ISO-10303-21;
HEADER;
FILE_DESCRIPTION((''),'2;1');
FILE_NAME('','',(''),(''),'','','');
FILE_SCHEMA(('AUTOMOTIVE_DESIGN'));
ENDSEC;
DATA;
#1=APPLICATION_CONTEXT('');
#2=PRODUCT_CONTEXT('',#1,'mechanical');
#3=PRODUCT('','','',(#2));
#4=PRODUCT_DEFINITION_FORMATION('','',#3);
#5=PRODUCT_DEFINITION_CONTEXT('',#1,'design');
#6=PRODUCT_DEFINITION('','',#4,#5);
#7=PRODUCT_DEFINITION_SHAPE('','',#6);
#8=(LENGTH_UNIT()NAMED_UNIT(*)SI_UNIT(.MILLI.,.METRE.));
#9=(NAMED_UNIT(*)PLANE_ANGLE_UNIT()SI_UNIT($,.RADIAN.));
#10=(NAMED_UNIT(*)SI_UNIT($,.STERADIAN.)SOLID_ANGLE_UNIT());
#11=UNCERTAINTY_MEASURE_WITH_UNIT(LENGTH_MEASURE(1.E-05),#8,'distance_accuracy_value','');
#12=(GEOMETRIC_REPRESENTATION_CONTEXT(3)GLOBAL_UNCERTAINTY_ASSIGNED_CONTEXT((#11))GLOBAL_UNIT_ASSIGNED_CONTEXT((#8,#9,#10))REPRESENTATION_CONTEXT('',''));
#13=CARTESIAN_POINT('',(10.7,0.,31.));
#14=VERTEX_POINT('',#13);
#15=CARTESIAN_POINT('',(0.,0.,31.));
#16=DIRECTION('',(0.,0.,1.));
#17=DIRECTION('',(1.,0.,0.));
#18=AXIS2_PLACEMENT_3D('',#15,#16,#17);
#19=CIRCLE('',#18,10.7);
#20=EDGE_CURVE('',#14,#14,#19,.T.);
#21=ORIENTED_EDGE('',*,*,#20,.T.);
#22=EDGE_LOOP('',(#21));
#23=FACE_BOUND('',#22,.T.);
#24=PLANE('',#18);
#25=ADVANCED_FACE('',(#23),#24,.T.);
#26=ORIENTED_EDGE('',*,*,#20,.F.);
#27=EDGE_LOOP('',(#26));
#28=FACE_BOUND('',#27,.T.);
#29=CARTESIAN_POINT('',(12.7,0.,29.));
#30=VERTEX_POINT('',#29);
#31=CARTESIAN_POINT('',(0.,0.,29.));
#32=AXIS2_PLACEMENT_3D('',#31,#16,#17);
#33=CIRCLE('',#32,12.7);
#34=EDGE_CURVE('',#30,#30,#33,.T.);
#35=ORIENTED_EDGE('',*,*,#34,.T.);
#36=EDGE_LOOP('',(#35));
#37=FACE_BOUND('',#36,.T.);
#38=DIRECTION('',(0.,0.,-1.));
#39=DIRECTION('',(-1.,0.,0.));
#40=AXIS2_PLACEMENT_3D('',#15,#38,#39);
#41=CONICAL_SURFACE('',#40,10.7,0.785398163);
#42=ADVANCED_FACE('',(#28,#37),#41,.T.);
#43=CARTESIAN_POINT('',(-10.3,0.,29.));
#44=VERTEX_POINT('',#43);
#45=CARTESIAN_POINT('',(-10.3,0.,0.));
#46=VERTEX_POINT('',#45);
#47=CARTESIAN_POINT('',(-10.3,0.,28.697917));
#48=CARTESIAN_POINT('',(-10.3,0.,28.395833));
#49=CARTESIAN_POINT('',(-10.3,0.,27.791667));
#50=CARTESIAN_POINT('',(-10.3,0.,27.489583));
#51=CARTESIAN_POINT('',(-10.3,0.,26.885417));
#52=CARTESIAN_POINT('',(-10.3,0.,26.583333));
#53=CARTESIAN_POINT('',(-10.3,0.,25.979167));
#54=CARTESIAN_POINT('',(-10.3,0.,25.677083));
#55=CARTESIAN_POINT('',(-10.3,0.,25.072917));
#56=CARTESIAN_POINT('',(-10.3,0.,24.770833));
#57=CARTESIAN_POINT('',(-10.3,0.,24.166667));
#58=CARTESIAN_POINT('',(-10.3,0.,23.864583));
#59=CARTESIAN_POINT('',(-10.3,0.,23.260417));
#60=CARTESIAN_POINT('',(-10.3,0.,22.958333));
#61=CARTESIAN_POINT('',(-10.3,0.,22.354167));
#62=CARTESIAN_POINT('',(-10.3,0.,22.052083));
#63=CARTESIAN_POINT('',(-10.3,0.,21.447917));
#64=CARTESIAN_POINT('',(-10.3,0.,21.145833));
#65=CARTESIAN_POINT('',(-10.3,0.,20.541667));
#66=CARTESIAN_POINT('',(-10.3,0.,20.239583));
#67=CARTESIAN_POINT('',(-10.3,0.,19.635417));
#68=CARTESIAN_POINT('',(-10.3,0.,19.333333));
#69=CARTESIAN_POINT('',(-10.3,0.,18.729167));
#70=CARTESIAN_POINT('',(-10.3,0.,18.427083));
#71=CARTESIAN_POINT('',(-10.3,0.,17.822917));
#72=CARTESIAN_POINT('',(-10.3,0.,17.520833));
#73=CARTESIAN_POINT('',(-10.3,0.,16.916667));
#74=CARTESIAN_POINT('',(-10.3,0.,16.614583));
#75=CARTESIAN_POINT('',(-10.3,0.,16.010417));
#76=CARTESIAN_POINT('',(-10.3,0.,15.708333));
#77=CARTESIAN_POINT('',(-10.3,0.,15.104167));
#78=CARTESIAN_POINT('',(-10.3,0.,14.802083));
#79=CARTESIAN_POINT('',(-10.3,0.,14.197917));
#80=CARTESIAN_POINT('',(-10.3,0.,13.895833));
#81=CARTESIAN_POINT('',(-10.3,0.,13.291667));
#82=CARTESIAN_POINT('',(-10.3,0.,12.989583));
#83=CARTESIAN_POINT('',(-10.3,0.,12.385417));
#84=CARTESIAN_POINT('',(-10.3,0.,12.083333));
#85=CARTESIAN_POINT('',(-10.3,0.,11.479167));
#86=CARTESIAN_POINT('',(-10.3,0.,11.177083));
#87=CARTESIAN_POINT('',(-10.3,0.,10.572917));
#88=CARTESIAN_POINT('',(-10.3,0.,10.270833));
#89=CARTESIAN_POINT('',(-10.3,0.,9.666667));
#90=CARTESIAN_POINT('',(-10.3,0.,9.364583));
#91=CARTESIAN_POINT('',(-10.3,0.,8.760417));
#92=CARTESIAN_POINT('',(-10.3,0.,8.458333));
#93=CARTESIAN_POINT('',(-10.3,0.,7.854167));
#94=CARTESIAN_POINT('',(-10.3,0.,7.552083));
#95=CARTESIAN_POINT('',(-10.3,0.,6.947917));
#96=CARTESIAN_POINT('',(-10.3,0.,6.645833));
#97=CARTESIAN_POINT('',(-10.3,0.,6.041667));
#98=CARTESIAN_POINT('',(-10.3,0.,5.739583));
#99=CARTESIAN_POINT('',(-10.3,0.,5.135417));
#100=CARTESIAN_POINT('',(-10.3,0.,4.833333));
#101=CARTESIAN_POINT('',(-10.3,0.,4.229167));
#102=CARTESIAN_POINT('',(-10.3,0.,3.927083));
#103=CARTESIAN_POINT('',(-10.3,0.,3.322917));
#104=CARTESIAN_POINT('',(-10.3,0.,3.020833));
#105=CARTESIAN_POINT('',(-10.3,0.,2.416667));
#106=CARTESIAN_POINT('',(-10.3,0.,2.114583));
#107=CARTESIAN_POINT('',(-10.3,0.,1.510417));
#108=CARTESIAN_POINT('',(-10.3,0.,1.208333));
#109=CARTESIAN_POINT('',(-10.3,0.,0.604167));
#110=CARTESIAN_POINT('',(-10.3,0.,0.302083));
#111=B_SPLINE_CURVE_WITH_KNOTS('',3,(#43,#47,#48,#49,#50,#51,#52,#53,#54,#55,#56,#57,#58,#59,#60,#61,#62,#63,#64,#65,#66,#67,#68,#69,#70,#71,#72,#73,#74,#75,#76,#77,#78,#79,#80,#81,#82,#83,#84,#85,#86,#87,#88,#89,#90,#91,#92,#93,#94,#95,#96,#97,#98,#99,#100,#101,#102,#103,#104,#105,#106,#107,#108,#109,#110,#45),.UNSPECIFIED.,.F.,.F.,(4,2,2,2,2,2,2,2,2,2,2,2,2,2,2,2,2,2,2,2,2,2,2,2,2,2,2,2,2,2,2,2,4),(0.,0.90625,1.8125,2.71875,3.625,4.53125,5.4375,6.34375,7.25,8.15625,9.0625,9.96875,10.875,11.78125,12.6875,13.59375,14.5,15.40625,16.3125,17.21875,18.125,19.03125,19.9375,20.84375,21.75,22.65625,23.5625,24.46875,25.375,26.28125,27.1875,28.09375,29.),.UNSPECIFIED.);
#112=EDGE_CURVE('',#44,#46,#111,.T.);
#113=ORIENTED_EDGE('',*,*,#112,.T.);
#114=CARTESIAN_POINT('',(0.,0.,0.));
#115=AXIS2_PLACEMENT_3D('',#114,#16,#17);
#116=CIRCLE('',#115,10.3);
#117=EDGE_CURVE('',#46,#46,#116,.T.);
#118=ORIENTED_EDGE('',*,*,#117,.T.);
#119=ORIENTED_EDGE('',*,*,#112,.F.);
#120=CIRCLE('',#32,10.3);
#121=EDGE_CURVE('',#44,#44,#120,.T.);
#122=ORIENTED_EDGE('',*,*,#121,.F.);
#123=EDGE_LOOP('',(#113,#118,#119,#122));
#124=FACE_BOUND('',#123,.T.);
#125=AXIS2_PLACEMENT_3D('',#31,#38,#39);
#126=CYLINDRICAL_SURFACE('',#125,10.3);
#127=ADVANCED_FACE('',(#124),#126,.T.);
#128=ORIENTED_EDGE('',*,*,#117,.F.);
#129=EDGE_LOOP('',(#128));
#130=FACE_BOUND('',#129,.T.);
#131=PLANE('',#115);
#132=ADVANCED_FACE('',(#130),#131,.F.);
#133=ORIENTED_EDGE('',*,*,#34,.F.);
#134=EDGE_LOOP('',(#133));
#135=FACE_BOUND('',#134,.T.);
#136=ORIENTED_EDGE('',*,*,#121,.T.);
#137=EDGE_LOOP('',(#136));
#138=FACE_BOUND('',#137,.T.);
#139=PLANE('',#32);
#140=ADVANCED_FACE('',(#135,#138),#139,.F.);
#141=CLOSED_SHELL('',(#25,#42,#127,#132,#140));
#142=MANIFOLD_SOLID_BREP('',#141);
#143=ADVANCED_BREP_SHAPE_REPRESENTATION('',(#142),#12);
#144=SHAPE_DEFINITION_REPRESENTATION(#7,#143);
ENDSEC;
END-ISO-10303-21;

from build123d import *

# Parameters (mm, degrees)
SKETCH2_R           = 10.3
BOSS_EXTRUDE1_DEPTH = 29
SKETCH3_R           = 12.7
BOSS_EXTRUDE2_DEPTH = 2
CHAMFER1_SIZE       = 2


with BuildPart() as part:
    # Sketch2 → Boss-Extrude1 (new body)
    with BuildSketch(Plane.XY):
        with Locations(Location((0, 0, 0), (0, 0, 180))):
            Circle(SKETCH2_R)
    extrude(amount=BOSS_EXTRUDE1_DEPTH)

    # Sketch3 → Boss-Extrude2 (add)
    with BuildSketch(Plane.XY.offset(29)):
        Circle(SKETCH3_R)
    extrude(amount=BOSS_EXTRUDE2_DEPTH)

    # Chamfer1
    chamfer1_edges = [part.edges().sort_by_distance(p)[0] for p in [
        (-12.7, 0, 31),
    ]]
    chamfer(chamfer1_edges, length=CHAMFER1_SIZE - 0.0001)  # a hair under: the kernel refuses the full size


solid = part.part
